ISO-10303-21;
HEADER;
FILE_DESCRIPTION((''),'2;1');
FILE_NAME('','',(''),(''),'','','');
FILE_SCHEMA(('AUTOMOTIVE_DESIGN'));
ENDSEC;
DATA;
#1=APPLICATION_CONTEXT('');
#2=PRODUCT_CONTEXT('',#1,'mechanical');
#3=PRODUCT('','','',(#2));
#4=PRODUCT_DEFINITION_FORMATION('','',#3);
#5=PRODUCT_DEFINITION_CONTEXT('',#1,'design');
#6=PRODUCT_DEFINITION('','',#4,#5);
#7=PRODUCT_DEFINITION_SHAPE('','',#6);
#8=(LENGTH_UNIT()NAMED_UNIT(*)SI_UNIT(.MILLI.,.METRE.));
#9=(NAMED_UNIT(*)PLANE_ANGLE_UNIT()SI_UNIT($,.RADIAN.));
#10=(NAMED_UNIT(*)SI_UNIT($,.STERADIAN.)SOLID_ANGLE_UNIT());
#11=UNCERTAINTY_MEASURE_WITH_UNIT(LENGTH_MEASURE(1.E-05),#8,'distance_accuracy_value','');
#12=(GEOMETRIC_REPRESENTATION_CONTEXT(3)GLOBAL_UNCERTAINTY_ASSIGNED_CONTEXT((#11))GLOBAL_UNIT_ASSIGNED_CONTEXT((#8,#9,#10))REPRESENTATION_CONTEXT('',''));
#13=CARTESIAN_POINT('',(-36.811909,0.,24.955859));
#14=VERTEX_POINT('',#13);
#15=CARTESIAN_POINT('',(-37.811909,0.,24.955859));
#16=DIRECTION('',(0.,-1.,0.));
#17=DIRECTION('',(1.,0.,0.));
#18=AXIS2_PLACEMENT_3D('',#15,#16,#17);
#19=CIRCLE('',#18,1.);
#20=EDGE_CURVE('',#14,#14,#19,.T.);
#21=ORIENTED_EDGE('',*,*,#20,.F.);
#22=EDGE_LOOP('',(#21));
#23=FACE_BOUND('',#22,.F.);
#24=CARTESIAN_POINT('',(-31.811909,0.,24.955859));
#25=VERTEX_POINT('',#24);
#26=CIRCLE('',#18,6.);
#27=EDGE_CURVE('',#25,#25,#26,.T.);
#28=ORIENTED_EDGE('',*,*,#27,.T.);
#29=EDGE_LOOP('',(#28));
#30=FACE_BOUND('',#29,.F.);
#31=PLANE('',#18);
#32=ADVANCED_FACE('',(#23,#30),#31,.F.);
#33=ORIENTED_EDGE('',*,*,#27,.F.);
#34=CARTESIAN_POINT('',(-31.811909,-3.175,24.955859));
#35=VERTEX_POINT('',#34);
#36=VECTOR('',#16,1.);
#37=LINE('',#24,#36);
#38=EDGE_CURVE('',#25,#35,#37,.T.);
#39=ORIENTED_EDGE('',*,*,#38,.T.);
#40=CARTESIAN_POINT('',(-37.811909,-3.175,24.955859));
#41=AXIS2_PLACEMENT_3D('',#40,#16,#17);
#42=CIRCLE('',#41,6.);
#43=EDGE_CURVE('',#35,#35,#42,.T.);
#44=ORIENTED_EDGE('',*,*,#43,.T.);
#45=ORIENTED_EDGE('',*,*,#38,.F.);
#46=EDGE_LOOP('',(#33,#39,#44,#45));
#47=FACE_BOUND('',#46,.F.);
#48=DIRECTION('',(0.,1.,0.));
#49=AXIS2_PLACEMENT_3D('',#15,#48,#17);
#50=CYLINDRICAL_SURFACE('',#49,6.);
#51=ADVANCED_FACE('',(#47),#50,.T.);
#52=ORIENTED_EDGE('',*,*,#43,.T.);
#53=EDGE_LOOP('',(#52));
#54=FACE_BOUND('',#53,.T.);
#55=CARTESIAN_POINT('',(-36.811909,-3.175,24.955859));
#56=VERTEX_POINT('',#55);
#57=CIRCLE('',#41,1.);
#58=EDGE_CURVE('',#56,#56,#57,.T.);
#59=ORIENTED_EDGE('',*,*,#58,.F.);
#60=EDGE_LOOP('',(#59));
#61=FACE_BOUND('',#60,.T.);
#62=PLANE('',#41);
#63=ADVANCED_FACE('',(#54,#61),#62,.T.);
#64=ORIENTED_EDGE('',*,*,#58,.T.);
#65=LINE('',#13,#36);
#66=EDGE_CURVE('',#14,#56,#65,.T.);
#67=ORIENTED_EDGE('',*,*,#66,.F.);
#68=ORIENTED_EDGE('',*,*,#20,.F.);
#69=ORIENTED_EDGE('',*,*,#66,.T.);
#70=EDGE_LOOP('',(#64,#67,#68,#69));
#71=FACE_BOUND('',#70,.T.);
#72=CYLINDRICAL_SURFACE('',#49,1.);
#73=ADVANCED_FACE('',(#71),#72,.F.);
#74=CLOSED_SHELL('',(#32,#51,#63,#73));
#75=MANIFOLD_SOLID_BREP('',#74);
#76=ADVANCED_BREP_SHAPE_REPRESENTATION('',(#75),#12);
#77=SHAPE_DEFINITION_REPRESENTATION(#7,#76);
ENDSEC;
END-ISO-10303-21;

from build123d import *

# Parameters (mm, degrees)
F0_R     = 6
F0_R_2   = 1
F1_DEPTH = 3.175


# Not quite as in the source:
# - a length typed as a fraction of an inch, garbled in the dataset ("3 / 203.2 mm" for 3/8 in), is restored


with BuildPart() as f1:
    # F0 (on Front) → F1 (new body)
    with BuildSketch(Plane.XZ):
        with Locations((-37.8119088709, 24.9558594078)):
            Circle(F0_R)
        with Locations((-37.8119088709, 24.9558594078)):
            Circle(F0_R_2, mode=Mode.SUBTRACT)
    extrude(amount=F1_DEPTH)


solid = f1.part
